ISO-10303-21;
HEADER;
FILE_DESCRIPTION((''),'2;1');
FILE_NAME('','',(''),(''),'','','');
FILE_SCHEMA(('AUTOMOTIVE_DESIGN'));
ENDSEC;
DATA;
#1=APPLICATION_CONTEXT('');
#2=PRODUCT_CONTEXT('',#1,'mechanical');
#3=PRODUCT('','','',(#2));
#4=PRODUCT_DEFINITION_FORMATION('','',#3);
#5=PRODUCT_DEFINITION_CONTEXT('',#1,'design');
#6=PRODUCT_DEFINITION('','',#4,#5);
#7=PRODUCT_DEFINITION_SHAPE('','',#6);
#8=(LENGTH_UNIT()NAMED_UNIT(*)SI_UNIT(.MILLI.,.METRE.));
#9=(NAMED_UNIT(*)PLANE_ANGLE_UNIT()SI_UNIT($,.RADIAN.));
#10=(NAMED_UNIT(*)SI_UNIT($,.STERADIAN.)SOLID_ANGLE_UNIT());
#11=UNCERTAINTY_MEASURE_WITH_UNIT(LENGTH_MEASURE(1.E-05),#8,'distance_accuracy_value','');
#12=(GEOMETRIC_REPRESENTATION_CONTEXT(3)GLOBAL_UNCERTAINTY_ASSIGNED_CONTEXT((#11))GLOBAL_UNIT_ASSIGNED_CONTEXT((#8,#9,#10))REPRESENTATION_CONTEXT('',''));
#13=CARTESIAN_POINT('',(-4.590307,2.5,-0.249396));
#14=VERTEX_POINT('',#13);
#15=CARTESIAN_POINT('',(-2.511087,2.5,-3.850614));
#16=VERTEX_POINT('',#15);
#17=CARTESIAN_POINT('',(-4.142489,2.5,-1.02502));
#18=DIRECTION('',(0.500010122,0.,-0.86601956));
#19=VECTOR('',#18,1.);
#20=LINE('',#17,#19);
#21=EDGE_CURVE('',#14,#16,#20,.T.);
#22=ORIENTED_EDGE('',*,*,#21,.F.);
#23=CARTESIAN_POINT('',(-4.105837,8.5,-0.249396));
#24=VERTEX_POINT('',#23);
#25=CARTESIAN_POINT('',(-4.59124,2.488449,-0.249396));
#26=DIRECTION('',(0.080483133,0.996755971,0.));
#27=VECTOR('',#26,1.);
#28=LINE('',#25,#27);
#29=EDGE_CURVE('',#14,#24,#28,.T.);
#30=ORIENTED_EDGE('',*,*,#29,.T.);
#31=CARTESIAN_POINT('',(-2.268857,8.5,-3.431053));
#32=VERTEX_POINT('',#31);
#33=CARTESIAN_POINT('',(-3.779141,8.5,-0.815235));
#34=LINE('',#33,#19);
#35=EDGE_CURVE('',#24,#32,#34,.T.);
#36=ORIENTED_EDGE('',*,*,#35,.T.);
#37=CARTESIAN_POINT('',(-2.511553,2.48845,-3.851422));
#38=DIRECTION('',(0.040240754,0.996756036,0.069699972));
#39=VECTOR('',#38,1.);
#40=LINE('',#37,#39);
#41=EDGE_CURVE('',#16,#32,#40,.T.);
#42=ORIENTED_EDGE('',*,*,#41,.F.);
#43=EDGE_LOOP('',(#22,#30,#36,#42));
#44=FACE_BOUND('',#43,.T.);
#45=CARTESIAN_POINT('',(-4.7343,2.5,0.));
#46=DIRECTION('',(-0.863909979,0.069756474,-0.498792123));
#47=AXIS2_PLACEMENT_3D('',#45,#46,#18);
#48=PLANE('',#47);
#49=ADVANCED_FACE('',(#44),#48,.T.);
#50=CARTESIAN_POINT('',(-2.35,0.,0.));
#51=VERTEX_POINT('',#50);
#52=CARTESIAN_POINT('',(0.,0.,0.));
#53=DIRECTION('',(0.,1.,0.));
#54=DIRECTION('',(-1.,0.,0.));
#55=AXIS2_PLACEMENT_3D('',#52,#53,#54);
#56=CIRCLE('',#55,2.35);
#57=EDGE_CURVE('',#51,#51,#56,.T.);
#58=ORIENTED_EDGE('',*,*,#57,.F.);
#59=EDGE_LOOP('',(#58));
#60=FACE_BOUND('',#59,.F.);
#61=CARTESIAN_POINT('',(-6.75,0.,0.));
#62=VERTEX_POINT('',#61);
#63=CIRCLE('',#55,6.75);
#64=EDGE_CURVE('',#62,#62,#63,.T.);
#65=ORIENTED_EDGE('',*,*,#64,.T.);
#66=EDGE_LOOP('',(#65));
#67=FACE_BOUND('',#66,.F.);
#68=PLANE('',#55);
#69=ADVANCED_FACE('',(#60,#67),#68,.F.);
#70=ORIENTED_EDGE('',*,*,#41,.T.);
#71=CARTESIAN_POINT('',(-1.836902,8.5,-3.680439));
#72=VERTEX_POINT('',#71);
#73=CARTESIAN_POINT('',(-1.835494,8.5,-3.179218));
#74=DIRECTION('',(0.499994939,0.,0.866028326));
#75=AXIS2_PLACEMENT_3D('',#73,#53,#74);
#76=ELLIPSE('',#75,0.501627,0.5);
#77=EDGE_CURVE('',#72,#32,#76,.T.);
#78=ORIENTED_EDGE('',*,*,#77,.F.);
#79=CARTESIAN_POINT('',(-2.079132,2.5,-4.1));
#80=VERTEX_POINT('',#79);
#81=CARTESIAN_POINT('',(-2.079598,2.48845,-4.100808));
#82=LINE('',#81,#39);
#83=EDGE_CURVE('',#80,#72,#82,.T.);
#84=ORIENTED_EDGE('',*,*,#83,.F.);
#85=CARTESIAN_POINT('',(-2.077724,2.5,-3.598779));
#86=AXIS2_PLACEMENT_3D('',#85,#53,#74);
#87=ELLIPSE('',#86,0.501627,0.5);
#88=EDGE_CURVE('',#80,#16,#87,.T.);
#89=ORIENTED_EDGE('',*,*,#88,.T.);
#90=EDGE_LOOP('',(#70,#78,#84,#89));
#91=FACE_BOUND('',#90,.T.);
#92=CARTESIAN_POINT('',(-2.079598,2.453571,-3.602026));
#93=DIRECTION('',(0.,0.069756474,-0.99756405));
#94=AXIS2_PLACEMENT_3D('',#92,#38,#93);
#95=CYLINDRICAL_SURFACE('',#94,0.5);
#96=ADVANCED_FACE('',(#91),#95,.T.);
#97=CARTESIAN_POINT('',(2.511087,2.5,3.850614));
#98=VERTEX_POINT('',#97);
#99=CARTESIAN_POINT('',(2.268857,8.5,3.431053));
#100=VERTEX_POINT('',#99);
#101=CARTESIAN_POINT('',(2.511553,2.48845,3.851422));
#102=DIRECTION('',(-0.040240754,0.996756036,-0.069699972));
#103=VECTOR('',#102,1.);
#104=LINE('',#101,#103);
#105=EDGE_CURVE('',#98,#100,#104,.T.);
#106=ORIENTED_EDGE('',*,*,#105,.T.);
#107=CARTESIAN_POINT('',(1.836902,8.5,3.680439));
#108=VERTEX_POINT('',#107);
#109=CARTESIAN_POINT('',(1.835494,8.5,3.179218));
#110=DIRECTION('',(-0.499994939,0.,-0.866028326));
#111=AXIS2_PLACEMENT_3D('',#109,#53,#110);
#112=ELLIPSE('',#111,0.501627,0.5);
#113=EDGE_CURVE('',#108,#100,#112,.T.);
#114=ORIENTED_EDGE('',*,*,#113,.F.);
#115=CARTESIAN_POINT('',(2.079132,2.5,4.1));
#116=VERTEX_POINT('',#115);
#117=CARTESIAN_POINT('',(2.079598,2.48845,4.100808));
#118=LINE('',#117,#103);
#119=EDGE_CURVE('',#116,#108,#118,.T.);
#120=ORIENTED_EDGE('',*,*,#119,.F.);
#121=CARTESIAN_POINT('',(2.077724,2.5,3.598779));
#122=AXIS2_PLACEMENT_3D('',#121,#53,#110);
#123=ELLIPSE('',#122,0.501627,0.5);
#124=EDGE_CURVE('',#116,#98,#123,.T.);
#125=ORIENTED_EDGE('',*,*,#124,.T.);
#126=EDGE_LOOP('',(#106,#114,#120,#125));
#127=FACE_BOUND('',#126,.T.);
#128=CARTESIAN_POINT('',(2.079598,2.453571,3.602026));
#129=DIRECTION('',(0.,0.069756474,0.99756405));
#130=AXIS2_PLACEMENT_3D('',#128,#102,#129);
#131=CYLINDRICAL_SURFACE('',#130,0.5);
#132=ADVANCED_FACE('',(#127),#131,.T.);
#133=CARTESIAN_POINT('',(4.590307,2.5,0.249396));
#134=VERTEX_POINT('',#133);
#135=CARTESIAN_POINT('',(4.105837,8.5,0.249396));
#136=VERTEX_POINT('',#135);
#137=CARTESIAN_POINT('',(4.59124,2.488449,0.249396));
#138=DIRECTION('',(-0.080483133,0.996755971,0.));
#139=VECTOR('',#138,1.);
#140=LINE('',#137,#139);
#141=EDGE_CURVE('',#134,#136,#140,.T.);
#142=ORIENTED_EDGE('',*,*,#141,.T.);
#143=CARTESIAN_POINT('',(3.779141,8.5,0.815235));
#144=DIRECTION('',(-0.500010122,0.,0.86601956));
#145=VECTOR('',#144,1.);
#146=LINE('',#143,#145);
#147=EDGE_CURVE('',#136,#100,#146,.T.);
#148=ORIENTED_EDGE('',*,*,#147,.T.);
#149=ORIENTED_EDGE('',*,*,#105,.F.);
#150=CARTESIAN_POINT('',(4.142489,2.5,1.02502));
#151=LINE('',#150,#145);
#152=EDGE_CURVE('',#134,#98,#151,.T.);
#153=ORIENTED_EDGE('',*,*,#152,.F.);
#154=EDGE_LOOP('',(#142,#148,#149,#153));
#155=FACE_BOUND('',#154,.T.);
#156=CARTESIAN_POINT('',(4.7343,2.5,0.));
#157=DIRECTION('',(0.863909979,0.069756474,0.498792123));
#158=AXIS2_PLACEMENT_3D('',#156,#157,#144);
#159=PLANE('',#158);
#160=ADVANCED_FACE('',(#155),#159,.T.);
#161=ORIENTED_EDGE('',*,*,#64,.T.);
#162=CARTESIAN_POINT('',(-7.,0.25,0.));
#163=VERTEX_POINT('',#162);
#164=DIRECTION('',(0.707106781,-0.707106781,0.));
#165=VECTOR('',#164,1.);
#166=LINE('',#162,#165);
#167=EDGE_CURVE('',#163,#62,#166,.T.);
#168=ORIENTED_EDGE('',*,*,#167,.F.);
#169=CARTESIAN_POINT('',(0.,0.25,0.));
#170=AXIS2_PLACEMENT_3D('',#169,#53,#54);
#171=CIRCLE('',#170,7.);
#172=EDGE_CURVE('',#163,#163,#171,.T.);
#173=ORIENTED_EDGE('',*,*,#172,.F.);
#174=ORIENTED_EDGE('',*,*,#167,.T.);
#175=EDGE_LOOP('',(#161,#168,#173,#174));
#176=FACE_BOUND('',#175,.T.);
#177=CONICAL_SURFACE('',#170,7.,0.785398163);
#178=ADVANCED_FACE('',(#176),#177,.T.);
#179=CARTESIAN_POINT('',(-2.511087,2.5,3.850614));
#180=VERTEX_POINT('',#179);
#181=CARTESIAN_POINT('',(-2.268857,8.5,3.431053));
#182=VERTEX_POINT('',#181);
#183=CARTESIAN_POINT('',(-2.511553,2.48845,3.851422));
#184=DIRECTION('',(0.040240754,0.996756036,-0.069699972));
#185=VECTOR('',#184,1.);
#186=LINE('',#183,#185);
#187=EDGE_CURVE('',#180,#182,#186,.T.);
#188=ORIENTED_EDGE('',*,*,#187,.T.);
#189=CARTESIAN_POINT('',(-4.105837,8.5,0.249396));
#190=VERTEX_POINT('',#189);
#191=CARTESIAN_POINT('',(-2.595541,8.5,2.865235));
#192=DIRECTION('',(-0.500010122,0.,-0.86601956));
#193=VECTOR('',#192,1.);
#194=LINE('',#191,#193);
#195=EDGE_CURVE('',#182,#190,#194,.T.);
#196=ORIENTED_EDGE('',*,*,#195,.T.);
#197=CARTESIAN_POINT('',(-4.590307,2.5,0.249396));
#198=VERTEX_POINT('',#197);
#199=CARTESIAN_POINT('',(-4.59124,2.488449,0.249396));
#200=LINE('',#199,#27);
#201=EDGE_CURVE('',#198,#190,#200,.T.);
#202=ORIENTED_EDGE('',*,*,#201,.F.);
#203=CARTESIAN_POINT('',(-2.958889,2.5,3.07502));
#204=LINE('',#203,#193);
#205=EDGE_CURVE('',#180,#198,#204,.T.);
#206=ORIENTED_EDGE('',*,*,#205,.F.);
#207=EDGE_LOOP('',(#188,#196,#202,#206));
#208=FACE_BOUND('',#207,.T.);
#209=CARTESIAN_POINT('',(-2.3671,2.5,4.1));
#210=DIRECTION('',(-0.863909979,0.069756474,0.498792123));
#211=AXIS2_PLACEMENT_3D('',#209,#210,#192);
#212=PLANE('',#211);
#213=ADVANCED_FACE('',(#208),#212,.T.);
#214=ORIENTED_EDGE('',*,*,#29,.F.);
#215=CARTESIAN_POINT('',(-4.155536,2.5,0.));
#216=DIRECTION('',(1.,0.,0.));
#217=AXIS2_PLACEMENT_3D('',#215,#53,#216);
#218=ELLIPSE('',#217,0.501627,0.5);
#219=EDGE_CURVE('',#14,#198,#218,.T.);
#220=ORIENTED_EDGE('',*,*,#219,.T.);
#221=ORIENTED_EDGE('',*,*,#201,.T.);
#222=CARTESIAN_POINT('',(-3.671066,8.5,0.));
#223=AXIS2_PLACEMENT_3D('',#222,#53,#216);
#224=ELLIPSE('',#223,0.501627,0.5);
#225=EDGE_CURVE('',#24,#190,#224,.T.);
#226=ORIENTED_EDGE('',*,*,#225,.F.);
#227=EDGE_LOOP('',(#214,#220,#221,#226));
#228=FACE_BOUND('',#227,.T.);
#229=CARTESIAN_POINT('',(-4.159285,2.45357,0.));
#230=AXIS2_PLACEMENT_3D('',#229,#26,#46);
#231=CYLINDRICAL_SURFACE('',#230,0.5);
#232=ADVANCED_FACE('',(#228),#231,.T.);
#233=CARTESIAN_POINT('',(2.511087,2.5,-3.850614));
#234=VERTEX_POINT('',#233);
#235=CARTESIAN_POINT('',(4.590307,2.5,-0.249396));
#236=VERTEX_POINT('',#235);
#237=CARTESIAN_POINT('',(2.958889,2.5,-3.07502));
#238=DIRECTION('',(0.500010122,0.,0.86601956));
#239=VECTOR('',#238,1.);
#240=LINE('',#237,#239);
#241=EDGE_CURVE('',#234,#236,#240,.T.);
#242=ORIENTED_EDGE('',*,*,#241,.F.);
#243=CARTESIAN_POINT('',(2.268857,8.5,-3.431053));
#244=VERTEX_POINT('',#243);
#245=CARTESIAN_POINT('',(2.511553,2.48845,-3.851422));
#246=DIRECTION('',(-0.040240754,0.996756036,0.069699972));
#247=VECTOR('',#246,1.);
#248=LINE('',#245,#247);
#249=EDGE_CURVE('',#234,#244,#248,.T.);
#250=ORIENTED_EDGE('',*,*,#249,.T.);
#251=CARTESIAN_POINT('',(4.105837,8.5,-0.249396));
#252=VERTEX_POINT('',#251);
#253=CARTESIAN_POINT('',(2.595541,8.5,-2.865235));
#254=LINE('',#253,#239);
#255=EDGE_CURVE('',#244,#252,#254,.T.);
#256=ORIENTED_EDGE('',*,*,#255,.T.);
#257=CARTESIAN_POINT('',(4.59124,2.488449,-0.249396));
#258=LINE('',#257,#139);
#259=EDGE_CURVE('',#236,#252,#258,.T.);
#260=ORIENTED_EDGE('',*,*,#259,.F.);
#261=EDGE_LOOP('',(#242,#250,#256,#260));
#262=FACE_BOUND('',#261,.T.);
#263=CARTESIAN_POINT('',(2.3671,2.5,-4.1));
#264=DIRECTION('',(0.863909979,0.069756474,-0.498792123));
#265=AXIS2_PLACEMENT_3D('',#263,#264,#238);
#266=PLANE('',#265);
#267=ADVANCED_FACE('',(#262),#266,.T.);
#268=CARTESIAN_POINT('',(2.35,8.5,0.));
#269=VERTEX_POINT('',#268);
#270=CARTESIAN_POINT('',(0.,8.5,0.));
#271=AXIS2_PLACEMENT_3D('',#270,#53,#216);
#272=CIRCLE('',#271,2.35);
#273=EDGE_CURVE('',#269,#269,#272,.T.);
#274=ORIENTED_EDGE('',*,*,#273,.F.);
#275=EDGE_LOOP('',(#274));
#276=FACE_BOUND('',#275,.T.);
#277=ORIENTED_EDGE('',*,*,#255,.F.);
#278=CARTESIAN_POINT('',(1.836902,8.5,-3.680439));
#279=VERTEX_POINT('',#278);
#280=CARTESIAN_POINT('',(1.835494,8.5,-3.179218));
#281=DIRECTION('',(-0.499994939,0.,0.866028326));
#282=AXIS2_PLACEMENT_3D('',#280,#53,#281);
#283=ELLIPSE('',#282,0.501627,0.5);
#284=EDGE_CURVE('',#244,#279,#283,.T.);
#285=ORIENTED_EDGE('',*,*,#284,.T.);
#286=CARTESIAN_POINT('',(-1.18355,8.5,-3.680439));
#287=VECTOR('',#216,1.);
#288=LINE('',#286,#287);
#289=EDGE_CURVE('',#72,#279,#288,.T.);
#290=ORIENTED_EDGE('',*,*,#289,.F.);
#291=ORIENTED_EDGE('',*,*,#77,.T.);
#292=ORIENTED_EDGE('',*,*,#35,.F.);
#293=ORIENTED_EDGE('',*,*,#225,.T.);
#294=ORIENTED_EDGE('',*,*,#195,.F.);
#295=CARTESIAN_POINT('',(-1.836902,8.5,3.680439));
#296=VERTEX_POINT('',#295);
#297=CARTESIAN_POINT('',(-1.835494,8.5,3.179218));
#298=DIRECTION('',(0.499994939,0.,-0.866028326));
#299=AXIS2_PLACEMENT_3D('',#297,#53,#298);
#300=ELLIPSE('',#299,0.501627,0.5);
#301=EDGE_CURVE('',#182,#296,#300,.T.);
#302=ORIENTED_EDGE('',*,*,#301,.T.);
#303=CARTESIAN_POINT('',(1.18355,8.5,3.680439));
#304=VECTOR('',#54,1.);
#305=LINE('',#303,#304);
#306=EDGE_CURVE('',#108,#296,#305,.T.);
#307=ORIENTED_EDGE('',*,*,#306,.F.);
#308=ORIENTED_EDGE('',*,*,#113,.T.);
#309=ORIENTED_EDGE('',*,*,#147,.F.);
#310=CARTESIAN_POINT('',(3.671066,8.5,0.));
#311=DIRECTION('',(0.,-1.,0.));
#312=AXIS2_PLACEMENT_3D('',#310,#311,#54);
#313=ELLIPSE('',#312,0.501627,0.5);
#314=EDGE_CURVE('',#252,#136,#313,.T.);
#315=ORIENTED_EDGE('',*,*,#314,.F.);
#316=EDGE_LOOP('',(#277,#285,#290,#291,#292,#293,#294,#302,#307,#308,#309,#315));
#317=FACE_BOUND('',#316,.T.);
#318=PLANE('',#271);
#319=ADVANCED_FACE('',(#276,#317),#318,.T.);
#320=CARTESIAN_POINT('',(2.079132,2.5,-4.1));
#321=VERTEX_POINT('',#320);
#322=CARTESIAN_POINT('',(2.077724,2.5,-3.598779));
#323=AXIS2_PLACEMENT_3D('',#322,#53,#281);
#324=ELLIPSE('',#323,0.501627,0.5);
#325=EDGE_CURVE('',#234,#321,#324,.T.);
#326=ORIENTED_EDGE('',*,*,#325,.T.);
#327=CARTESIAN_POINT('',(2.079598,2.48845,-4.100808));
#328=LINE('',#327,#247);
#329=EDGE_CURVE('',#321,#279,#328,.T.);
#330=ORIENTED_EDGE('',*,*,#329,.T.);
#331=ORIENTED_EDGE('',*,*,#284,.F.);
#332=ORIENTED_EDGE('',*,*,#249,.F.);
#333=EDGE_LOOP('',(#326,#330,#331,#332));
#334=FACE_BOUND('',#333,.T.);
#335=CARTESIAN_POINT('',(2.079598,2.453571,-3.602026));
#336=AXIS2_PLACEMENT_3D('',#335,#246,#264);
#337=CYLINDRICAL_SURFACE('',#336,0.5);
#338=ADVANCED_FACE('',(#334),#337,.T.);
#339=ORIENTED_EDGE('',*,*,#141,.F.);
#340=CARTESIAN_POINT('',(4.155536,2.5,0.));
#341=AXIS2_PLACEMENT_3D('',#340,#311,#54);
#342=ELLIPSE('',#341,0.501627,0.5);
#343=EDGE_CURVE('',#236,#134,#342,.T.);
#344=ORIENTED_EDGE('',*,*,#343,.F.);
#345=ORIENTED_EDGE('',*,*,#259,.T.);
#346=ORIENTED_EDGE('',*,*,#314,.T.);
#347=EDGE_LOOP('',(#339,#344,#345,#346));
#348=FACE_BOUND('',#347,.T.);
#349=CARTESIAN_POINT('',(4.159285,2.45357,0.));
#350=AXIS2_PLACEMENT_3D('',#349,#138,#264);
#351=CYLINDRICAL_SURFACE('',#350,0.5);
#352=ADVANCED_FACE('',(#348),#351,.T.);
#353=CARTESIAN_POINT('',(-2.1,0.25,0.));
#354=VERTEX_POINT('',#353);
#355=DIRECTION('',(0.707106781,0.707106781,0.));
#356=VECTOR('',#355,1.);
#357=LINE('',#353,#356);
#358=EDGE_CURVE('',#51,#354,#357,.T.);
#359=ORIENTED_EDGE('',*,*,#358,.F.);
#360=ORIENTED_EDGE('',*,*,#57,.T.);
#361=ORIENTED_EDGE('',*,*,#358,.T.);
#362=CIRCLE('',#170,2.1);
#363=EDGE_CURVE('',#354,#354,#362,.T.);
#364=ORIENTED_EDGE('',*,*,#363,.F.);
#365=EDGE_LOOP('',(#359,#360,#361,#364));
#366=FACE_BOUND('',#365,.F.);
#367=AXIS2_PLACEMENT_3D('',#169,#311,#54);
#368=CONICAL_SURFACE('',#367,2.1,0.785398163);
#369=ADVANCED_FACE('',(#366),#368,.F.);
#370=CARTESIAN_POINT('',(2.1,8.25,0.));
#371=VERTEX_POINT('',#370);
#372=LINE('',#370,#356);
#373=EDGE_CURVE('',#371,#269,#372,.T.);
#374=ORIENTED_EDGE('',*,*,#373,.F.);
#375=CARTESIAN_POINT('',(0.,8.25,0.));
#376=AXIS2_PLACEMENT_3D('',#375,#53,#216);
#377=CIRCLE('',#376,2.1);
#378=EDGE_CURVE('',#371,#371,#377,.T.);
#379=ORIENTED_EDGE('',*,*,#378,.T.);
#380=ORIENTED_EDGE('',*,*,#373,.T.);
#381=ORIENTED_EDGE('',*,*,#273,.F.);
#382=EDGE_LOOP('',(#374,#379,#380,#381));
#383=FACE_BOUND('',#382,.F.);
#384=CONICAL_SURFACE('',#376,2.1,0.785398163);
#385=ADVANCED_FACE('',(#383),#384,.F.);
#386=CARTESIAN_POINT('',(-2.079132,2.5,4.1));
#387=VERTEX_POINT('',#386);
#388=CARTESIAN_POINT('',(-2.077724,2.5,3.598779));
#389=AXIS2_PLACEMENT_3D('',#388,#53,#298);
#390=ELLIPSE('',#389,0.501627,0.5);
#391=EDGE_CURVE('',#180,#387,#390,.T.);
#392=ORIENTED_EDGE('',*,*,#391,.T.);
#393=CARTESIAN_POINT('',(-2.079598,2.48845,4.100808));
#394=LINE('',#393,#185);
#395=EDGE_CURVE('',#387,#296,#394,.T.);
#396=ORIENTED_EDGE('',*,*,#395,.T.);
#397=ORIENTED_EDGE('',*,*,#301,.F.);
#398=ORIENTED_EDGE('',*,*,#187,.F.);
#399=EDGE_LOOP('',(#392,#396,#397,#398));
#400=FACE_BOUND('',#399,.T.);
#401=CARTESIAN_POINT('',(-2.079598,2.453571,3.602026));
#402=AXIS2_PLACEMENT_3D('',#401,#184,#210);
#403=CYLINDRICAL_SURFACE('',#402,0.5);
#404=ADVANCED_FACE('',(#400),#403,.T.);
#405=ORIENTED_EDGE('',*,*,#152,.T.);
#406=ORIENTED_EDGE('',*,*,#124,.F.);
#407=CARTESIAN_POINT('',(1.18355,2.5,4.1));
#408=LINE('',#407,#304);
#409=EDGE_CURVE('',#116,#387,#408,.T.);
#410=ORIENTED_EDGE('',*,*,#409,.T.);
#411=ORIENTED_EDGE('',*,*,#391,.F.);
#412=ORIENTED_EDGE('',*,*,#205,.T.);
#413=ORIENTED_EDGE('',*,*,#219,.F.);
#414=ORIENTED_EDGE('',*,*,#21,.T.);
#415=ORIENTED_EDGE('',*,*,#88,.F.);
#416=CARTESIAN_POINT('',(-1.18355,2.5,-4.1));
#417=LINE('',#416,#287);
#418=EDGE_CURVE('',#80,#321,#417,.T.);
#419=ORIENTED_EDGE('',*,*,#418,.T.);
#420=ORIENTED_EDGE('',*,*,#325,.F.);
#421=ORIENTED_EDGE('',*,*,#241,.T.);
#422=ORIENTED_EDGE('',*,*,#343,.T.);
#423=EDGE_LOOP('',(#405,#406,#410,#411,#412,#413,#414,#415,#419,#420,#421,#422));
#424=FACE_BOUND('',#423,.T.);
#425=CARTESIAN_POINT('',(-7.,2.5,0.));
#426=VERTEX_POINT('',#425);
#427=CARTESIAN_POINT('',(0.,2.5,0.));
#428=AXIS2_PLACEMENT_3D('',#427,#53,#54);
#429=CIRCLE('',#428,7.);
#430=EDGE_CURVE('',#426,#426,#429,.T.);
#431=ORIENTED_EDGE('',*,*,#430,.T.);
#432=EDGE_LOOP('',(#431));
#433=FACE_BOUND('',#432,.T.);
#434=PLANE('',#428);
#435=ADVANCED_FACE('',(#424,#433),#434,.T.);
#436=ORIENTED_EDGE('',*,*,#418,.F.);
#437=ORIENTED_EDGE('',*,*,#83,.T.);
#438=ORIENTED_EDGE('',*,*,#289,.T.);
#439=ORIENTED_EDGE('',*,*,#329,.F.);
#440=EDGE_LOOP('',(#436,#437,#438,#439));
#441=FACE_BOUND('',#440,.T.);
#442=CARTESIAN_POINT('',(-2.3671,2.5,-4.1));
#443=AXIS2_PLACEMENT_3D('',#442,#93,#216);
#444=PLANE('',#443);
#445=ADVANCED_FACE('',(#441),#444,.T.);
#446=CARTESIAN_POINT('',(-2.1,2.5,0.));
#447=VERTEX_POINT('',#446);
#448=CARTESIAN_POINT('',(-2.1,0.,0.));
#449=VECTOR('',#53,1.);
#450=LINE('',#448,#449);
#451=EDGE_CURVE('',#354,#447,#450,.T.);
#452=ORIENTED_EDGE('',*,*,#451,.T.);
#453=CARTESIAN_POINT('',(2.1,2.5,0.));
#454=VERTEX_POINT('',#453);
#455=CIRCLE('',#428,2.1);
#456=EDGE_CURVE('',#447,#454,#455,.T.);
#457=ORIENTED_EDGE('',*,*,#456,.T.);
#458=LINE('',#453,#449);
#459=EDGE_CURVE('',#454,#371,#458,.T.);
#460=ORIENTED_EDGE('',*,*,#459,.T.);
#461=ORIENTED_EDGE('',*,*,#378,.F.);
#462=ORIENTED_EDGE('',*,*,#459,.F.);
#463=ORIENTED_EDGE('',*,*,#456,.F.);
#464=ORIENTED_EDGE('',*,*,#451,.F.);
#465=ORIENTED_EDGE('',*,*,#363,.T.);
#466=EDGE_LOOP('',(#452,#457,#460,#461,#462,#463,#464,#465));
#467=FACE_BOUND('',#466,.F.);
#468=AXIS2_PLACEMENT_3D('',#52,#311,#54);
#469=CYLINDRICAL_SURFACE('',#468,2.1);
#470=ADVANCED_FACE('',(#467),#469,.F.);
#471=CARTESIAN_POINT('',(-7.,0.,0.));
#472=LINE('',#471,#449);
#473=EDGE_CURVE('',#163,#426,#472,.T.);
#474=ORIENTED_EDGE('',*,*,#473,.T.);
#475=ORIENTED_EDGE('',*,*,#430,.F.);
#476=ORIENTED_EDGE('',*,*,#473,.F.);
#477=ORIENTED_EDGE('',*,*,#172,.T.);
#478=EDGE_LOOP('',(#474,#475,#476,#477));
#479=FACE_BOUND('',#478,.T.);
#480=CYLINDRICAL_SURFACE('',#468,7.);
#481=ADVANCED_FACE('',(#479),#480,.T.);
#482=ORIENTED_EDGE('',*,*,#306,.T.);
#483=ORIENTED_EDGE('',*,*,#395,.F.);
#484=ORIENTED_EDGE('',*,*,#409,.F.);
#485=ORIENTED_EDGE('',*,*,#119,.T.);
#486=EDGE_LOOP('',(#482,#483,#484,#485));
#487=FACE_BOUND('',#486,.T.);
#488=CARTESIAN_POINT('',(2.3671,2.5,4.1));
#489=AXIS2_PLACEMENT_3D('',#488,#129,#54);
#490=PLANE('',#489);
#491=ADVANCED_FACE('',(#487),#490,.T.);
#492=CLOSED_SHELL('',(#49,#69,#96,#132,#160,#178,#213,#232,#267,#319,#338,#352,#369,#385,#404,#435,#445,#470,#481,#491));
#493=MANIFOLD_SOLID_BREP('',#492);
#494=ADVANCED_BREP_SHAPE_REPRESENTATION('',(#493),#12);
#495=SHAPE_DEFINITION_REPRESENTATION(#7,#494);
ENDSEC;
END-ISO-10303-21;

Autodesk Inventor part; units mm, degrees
ref_plane "YZ Plane" through (0, 0, 0) normal (1, 0, 0) x (0, 1, 0)
ref_plane "XZ Plane" through (0, 0, 0) normal (0, 1, 0) x (-1, 0, 0)
ref_plane "XY Plane" through (0, 0, 0) normal (0, 0, 1) x (1, 0, 0)
sketch "Sketch1" plane through (0, 0, 0) normal (0, 1, 0) x (-1, 0, 0)
  circle A0 centre (0, 0) radius 7
  circle A1 centre (0, 0) radius 2.1
  dimension "d0" = 14
  dimension "d1" = 4.2
extrude "Extrusion1" add sketch "Sketch1" along normal blind 2.5
sketch "Sketch2" plane through (0, 2.5, 0) normal (0, 1, 0) x (1, 0, 0)
  circle A0 centre (0, 0) radius 2.1
  line L0 (4.7343, 0) -> (2.3671, -4.1)
  line L1 (2.3671, -4.1) -> (-2.3671, -4.1)
  line L2 (-2.3671, -4.1) -> (-4.7343, 0)
  line L3 (-4.7343, 0) -> (-2.3671, 4.1)
  line L4 (-2.3671, 4.1) -> (2.3671, 4.1)
  line L5 (2.3671, 4.1) -> (4.7343, 0)
  dimension "d10" = 2
  dimension "d11" = 4.2
extrude "Extrusion2" add sketch "Sketch2" along normal blind 6
chamfer "Chamfer1" distance 0.25 angle 45 3 edges at (7, 0, 0) (-2.1, 8.5, 0) (2.1, 0, 0)
draft "FaceDraft1" angle 4 pull direction (0, 1, 0) faces at (3.1562, 4.5, 2.7333) (-0.789, 4.5, 4.1) (3.9452, 4.5, -1.3667) (-3.9452, 4.5, 1.3667) (-3.1562, 4.5, -2.7333) (0.789, 4.5, -4.1) fixed edges at (3.5507, 2.5, 2.05) (0, 2.5, 4.1) (3.5507, 2.5, -2.05) (-3.5507, 2.5, 2.05) (-3.5507, 2.5, -2.05) (0, 2.5, -4.1)
fillet "Fillet1" radius 0.5 6 edges at (2.246, 5.5, -3.8902) (-2.246, 5.5, 3.8902) (2.246, 5.5, 3.8902) (-2.246, 5.5, -3.8902) (4.492, 5.5, 0) (-4.492, 5.5, 0)
properties part number "TeflonHolderWasher"
